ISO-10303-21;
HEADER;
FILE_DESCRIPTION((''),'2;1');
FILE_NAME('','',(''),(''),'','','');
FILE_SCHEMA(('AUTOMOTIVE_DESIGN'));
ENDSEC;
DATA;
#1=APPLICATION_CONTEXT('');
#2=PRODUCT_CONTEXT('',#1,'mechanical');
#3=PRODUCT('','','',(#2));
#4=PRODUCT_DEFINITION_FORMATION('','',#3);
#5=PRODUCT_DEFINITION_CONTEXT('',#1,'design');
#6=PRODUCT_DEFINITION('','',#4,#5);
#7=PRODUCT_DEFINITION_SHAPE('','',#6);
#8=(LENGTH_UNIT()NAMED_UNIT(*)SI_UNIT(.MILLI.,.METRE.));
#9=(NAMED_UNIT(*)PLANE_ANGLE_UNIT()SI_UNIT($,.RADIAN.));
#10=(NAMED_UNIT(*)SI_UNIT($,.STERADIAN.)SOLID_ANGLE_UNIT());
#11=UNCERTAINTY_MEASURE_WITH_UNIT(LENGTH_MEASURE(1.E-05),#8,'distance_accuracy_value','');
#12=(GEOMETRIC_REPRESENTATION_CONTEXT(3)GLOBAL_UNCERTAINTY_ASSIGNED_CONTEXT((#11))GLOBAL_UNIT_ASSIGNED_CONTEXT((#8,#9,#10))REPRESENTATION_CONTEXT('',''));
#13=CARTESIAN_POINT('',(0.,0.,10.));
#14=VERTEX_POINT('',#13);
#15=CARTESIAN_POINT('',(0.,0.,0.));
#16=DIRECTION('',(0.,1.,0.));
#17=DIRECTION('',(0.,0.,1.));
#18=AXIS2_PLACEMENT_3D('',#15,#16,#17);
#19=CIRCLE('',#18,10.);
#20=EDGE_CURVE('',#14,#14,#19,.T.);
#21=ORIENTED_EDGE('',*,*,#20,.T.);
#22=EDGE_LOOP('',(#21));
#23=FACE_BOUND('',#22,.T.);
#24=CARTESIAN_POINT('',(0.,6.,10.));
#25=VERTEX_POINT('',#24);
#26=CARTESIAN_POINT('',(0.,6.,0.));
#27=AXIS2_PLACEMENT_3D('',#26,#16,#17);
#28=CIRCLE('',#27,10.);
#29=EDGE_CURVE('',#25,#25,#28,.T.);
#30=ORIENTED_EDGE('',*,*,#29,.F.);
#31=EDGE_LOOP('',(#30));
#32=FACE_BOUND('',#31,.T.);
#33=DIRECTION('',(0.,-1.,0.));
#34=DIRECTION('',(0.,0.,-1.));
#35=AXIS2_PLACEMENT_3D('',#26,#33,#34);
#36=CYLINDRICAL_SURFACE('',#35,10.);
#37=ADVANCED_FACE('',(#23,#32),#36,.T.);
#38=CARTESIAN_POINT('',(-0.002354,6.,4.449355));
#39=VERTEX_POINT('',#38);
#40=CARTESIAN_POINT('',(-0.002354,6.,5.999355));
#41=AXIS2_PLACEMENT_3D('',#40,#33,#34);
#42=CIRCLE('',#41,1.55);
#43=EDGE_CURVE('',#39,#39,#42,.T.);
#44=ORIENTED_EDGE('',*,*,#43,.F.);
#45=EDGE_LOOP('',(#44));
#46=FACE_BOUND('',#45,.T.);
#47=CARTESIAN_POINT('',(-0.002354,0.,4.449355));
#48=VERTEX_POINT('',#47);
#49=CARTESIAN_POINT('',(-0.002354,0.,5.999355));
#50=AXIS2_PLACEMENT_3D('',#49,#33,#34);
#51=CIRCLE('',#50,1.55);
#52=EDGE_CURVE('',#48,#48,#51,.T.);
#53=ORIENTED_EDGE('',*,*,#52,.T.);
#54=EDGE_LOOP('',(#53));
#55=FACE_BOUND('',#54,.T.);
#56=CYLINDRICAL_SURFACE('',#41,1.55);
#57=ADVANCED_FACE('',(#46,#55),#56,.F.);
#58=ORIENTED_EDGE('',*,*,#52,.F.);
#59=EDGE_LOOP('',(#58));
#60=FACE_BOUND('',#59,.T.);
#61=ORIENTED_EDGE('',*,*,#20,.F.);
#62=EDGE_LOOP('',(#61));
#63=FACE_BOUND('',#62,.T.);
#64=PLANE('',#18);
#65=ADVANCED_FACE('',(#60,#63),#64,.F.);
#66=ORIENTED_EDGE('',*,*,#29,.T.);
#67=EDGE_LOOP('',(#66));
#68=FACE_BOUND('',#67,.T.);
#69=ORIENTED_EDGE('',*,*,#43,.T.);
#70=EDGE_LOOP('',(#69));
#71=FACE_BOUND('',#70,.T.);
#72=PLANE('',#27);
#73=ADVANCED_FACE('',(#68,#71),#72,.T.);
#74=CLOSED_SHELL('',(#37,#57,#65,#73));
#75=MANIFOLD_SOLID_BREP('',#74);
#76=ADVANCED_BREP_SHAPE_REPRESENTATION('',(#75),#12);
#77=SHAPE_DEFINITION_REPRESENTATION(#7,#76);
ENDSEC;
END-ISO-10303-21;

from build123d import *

# Parameters (mm, degrees)
SKETCH1_R           = 10
BOSS_EXTRUDE1_DEPTH = 6
HOLE1_OUTLINE_R     = 1.55
HOLE1_DEPTH         = 6


# Read off the part's stored shape, not the designer's step: Hole1
with BuildPart() as part:
    # Sketch1 → Boss-Extrude1 (new body)
    with BuildSketch(Plane(origin=(0, 0, 0), x_dir=(1, 0, 0), z_dir=(0, 1, 0))):
        with Locations(Location((0, 0, 0), (0, 0, 270))):
            Circle(SKETCH1_R)
    extrude(amount=BOSS_EXTRUDE1_DEPTH)

    # Hole1 outline → Hole1 (cut)
    with BuildSketch(Plane(origin=(0, 0, 0), x_dir=(1, 0, 0), z_dir=(0, 1, 0))):
        with Locations((-0.002353502, -5.99935518)):
            Circle(HOLE1_OUTLINE_R)
    extrude(amount=HOLE1_DEPTH, mode=Mode.SUBTRACT)


solid = part.part
